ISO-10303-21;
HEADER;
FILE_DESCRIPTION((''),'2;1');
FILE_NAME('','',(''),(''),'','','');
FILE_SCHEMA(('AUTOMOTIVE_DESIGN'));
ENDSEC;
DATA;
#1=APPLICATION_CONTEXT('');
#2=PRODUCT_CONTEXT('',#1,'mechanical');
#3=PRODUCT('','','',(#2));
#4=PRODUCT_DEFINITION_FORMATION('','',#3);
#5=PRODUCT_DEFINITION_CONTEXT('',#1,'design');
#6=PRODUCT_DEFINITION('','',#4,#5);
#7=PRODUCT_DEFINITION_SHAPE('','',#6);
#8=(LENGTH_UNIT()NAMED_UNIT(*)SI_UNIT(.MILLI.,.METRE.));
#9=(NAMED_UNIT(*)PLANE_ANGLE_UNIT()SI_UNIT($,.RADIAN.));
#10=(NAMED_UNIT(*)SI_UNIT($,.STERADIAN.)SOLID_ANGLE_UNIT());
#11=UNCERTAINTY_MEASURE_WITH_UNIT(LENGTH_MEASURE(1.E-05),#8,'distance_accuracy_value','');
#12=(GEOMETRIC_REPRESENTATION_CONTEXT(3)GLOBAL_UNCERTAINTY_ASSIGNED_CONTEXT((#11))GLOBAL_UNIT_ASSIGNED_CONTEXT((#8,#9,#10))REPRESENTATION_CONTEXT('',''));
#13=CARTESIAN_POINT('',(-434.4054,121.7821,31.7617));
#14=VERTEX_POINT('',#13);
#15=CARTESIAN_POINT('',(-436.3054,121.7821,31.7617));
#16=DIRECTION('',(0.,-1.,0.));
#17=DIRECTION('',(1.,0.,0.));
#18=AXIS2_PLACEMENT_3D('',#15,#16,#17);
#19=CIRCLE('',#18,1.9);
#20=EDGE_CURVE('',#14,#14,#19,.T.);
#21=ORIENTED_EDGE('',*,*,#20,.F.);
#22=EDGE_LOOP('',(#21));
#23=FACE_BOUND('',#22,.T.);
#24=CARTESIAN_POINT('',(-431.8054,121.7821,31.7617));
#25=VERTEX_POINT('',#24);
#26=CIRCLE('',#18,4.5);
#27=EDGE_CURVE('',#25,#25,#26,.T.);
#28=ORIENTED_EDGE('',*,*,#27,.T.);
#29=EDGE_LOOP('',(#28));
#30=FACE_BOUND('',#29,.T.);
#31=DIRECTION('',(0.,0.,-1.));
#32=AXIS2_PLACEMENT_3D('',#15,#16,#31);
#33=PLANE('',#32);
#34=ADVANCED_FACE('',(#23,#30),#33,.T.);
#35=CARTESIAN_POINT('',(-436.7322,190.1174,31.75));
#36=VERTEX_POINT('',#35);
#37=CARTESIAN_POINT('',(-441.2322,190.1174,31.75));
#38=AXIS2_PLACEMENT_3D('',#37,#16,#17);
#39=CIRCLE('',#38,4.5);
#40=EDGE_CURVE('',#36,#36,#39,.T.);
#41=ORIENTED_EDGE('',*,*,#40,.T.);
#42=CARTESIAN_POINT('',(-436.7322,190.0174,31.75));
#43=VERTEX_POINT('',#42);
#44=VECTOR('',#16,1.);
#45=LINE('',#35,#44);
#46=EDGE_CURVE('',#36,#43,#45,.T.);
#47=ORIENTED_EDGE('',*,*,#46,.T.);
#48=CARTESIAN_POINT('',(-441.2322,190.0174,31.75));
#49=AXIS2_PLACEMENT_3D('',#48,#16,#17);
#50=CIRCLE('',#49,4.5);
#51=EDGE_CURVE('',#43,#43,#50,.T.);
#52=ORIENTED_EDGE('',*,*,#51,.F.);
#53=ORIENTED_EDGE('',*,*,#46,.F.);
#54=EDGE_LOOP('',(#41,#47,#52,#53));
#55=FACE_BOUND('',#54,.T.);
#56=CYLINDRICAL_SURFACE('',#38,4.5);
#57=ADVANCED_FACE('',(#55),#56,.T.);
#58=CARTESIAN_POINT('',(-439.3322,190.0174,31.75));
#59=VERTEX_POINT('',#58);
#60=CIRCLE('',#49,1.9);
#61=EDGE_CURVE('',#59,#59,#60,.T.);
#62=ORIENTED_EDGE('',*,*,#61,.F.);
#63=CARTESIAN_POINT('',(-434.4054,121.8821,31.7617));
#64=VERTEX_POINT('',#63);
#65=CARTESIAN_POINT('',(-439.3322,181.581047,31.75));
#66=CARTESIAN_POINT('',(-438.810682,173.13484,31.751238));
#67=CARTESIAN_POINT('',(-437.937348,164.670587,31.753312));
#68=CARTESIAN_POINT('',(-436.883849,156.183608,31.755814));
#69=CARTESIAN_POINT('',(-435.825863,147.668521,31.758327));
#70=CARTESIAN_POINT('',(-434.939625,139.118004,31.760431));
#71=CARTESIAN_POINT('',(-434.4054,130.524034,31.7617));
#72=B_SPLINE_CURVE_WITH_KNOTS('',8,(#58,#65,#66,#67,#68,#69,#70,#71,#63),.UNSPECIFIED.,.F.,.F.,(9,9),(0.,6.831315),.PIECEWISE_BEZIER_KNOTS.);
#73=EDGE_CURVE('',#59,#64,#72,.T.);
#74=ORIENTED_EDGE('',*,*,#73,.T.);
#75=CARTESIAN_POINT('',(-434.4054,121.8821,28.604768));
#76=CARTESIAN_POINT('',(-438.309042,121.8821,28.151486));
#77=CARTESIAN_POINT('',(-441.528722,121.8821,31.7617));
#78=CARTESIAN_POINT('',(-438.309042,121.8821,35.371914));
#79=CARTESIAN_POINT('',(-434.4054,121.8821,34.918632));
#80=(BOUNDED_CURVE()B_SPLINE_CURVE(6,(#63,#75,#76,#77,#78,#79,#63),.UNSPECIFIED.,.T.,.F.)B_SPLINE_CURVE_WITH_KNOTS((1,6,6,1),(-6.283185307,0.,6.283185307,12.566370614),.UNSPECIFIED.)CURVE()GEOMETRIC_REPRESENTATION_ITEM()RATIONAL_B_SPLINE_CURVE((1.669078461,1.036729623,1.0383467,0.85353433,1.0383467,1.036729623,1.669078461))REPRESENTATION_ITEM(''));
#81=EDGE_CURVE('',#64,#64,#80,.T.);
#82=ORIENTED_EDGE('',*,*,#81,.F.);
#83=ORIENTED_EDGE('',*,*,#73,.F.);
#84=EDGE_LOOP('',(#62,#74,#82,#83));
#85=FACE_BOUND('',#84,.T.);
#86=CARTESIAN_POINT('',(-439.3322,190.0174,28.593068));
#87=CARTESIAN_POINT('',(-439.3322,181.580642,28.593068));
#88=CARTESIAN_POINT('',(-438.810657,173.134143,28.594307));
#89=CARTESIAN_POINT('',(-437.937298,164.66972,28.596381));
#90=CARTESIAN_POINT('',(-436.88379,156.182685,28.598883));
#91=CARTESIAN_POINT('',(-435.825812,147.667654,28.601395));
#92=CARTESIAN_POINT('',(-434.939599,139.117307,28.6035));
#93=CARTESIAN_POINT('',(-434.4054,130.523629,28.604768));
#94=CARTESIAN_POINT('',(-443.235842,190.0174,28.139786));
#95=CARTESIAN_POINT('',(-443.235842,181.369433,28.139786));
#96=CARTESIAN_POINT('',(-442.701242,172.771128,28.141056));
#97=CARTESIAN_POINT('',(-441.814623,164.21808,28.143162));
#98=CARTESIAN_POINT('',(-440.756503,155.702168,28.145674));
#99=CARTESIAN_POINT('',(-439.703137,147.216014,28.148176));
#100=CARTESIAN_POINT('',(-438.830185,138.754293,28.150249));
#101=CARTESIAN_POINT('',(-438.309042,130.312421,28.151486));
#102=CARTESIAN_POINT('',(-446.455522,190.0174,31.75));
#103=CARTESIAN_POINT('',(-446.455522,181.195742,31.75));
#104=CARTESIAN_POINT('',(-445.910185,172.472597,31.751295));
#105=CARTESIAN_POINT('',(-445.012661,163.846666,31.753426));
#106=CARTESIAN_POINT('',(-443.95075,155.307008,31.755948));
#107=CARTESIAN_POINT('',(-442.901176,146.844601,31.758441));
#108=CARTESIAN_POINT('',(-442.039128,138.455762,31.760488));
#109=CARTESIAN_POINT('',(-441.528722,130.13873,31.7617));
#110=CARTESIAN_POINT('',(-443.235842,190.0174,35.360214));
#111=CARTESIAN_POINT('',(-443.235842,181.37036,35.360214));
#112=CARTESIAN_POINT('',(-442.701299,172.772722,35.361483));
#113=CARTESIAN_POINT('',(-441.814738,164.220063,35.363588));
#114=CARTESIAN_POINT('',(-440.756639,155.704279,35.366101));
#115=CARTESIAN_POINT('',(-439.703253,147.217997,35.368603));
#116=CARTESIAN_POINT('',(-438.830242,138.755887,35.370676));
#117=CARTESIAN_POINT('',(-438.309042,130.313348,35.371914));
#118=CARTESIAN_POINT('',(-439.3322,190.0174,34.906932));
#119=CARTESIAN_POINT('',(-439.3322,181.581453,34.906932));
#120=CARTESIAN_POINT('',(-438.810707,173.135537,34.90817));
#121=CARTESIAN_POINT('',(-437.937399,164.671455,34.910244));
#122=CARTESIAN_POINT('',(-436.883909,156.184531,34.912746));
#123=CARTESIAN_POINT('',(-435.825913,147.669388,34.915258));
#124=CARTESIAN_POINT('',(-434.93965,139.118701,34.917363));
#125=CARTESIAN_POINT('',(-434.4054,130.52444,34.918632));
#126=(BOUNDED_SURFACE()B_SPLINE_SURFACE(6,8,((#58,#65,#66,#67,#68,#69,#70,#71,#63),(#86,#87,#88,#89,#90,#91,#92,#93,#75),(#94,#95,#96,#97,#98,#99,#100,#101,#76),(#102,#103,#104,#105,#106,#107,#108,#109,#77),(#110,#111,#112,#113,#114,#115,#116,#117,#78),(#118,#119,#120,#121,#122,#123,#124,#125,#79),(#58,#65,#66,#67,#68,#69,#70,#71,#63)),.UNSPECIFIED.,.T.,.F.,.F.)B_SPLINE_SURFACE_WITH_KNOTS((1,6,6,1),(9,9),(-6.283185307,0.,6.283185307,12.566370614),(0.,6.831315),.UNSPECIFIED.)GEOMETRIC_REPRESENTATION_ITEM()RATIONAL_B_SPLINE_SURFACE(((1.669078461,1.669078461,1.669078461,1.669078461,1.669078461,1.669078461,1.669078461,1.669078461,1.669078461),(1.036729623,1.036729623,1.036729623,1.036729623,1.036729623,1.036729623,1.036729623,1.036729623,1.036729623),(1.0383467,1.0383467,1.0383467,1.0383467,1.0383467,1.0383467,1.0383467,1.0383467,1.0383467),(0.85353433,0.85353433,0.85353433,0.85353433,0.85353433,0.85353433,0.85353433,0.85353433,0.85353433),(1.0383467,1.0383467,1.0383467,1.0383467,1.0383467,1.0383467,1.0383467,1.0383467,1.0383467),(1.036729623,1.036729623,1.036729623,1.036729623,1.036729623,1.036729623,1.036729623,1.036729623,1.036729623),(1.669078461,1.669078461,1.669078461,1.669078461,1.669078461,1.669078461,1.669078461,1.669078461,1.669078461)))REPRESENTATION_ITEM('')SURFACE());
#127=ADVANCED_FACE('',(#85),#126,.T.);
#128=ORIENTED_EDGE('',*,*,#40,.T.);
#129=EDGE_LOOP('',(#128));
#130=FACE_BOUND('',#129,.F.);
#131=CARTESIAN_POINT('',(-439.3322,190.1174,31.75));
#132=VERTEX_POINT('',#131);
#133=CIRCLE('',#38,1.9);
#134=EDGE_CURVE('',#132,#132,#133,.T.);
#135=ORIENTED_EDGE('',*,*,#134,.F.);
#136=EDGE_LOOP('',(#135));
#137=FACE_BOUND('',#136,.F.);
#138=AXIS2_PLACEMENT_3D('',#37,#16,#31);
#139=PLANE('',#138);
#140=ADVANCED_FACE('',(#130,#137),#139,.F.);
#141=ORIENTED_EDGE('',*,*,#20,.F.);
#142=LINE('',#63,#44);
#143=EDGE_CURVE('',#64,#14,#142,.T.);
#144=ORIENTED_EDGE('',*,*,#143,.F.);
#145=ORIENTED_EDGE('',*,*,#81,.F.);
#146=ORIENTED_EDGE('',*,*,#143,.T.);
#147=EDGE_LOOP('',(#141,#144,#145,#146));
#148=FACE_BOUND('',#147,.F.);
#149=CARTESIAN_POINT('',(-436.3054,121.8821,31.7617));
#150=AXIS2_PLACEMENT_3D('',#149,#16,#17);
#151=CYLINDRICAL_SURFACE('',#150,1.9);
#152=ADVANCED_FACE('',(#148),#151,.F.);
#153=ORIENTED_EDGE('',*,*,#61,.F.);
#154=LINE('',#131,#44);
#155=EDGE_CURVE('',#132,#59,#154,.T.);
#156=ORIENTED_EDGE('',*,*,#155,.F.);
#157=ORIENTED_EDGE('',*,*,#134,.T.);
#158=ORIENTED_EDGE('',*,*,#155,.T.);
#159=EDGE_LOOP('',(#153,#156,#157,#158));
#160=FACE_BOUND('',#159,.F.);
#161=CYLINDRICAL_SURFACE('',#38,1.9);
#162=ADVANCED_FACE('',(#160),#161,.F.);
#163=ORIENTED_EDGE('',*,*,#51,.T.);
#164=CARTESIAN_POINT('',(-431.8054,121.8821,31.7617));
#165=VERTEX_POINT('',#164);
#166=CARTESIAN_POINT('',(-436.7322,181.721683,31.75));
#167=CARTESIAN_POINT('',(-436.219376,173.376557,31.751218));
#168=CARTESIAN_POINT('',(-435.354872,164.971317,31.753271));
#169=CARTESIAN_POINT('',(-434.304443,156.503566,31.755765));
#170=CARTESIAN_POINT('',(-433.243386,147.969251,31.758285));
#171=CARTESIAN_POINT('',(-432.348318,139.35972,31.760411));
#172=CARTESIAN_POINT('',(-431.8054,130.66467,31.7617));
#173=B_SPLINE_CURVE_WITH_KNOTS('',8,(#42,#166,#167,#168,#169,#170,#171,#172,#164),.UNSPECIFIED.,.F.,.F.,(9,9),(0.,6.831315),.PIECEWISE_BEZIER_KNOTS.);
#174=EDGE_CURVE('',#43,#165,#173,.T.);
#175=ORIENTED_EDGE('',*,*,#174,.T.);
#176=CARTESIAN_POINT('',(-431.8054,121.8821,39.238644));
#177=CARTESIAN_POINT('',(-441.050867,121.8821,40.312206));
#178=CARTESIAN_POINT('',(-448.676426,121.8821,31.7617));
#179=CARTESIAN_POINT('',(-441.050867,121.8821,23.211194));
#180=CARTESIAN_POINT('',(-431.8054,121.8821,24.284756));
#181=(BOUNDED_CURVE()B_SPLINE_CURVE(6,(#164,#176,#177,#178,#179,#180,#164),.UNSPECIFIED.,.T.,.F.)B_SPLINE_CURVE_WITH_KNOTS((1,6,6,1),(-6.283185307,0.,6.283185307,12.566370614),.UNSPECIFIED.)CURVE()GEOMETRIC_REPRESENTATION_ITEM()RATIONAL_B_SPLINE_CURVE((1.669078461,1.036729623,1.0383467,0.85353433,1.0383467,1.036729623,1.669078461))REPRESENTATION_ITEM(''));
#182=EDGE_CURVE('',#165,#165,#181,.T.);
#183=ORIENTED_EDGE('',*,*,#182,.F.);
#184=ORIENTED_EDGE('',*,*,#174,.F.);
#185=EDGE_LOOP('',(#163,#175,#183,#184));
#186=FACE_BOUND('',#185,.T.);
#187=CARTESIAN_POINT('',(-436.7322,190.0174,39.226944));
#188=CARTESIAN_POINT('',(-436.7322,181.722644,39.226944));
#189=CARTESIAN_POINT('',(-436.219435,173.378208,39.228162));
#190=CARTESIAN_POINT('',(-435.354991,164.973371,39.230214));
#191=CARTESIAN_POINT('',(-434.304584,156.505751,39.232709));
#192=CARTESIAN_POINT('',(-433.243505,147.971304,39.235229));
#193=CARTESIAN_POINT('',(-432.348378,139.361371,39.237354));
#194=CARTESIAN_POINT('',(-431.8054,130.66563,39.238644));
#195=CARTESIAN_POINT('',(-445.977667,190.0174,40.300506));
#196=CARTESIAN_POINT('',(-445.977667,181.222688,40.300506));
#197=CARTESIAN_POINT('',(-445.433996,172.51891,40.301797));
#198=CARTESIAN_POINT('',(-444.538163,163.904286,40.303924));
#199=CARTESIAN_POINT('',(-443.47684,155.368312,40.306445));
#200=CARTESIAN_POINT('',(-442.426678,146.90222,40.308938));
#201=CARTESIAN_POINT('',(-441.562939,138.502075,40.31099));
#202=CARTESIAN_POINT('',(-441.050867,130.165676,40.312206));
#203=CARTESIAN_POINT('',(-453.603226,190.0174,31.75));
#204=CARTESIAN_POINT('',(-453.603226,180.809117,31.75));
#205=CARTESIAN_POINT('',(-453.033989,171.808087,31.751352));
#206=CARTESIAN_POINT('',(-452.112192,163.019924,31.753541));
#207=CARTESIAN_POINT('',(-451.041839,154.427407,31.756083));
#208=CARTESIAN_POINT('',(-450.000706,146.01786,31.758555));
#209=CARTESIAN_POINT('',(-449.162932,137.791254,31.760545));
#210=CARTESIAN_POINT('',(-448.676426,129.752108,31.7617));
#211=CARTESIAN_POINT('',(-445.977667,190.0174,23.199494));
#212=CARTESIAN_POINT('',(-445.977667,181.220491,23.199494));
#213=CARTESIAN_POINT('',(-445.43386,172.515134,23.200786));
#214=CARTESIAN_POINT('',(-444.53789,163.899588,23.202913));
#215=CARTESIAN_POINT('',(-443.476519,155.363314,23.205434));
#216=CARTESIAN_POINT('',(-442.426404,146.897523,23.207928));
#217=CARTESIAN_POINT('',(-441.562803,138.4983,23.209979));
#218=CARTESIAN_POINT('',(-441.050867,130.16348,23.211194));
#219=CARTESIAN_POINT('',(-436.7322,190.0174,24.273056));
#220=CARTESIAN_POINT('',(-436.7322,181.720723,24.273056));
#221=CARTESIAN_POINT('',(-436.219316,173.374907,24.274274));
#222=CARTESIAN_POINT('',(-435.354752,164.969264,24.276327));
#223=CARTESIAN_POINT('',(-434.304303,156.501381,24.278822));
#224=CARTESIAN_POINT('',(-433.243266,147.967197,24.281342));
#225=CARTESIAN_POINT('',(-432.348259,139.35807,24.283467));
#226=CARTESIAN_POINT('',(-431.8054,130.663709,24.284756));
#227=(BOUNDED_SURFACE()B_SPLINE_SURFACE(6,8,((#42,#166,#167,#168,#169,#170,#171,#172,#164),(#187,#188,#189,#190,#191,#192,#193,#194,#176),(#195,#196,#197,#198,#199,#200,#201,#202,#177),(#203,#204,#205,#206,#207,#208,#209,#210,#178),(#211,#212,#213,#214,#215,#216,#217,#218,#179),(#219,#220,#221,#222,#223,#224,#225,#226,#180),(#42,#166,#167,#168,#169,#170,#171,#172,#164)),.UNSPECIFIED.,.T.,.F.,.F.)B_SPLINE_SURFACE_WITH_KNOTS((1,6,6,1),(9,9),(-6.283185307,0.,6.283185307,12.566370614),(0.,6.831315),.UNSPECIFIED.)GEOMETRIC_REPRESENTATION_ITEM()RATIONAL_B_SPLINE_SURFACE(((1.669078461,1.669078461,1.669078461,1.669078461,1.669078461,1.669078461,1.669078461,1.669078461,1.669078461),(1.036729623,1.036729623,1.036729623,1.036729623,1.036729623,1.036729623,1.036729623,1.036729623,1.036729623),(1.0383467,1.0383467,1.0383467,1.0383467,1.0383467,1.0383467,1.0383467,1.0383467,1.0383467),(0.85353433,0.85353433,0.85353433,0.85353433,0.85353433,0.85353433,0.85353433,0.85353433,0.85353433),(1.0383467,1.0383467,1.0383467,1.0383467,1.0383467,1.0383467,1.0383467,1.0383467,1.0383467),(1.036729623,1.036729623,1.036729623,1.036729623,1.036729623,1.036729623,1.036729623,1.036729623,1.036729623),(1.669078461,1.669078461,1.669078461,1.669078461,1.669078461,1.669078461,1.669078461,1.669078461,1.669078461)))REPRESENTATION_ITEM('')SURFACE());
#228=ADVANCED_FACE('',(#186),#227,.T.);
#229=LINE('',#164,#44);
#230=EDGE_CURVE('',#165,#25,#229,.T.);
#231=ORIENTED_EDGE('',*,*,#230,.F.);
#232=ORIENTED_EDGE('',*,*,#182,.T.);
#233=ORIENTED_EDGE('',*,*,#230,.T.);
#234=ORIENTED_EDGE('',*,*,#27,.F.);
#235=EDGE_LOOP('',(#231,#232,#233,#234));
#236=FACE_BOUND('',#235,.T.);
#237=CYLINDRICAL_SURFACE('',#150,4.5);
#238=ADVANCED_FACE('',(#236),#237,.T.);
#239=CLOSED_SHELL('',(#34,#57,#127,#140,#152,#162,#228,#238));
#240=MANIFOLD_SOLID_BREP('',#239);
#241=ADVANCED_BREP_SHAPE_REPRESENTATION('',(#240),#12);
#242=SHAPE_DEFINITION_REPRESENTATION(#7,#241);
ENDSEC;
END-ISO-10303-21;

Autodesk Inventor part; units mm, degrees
ref_plane "YZ Plane" through (0, 0, 0) normal (1, 0, 0) x (0, 1, 0)
ref_plane "XZ Plane" through (0, 0, 0) normal (0, 1, 0) x (-1, 0, 0)
ref_plane "XY Plane" through (0, 0, 0) normal (0, 0, 1) x (1, 0, 0)
ref_plane "Work Plane3" through (-441.2322, 190.0174, 31.75) normal (0, -1, 0) x (1, 0, 0)
sketch "Sketch7" plane through (-441.2322, 190.0174, 31.75) normal (0, -1, 0) x (1, 0, 0)
  circle A0 centre (0, 0) radius 4.5
  circle A1 centre (0, 0) radius 1.9
sketch3d "3D Sketch1"
  line L0 (-441.2322, 190.1174, 31.75) -> (-441.2322, 190.0174, 31.75)
  spline S0 degree 3 poles (-441.2322, 190.0174, 31.75) (-441.2322, 167.2464, 31.75) (-436.3054, 144.6532, 31.7617) (-436.3054, 121.8821, 31.7617) knots 0 0 0 0 6.831315 6.831315 6.831315 6.831315
  line L1 (-436.3054, 121.8821, 31.7617) -> (-436.3054, 121.7821, 31.7617)
  dimension "d19" = 1
  dimension "d20" = 1
sweep "Sweep1" add profiles "Sketch7" path "3D Sketch1"
equation "\"ID\" = 3.8"
equation "\"OD_\" = 9"
equation "\"L\" = PL"
equation "\"PL\" = 68.349"
equation "\"OD\" = 12.345"
equation "\"RPL\" = 69"
equation "\"OPL\" = 68.349"
equation "\"ROPL\" = 69"
properties material "Rubber"
